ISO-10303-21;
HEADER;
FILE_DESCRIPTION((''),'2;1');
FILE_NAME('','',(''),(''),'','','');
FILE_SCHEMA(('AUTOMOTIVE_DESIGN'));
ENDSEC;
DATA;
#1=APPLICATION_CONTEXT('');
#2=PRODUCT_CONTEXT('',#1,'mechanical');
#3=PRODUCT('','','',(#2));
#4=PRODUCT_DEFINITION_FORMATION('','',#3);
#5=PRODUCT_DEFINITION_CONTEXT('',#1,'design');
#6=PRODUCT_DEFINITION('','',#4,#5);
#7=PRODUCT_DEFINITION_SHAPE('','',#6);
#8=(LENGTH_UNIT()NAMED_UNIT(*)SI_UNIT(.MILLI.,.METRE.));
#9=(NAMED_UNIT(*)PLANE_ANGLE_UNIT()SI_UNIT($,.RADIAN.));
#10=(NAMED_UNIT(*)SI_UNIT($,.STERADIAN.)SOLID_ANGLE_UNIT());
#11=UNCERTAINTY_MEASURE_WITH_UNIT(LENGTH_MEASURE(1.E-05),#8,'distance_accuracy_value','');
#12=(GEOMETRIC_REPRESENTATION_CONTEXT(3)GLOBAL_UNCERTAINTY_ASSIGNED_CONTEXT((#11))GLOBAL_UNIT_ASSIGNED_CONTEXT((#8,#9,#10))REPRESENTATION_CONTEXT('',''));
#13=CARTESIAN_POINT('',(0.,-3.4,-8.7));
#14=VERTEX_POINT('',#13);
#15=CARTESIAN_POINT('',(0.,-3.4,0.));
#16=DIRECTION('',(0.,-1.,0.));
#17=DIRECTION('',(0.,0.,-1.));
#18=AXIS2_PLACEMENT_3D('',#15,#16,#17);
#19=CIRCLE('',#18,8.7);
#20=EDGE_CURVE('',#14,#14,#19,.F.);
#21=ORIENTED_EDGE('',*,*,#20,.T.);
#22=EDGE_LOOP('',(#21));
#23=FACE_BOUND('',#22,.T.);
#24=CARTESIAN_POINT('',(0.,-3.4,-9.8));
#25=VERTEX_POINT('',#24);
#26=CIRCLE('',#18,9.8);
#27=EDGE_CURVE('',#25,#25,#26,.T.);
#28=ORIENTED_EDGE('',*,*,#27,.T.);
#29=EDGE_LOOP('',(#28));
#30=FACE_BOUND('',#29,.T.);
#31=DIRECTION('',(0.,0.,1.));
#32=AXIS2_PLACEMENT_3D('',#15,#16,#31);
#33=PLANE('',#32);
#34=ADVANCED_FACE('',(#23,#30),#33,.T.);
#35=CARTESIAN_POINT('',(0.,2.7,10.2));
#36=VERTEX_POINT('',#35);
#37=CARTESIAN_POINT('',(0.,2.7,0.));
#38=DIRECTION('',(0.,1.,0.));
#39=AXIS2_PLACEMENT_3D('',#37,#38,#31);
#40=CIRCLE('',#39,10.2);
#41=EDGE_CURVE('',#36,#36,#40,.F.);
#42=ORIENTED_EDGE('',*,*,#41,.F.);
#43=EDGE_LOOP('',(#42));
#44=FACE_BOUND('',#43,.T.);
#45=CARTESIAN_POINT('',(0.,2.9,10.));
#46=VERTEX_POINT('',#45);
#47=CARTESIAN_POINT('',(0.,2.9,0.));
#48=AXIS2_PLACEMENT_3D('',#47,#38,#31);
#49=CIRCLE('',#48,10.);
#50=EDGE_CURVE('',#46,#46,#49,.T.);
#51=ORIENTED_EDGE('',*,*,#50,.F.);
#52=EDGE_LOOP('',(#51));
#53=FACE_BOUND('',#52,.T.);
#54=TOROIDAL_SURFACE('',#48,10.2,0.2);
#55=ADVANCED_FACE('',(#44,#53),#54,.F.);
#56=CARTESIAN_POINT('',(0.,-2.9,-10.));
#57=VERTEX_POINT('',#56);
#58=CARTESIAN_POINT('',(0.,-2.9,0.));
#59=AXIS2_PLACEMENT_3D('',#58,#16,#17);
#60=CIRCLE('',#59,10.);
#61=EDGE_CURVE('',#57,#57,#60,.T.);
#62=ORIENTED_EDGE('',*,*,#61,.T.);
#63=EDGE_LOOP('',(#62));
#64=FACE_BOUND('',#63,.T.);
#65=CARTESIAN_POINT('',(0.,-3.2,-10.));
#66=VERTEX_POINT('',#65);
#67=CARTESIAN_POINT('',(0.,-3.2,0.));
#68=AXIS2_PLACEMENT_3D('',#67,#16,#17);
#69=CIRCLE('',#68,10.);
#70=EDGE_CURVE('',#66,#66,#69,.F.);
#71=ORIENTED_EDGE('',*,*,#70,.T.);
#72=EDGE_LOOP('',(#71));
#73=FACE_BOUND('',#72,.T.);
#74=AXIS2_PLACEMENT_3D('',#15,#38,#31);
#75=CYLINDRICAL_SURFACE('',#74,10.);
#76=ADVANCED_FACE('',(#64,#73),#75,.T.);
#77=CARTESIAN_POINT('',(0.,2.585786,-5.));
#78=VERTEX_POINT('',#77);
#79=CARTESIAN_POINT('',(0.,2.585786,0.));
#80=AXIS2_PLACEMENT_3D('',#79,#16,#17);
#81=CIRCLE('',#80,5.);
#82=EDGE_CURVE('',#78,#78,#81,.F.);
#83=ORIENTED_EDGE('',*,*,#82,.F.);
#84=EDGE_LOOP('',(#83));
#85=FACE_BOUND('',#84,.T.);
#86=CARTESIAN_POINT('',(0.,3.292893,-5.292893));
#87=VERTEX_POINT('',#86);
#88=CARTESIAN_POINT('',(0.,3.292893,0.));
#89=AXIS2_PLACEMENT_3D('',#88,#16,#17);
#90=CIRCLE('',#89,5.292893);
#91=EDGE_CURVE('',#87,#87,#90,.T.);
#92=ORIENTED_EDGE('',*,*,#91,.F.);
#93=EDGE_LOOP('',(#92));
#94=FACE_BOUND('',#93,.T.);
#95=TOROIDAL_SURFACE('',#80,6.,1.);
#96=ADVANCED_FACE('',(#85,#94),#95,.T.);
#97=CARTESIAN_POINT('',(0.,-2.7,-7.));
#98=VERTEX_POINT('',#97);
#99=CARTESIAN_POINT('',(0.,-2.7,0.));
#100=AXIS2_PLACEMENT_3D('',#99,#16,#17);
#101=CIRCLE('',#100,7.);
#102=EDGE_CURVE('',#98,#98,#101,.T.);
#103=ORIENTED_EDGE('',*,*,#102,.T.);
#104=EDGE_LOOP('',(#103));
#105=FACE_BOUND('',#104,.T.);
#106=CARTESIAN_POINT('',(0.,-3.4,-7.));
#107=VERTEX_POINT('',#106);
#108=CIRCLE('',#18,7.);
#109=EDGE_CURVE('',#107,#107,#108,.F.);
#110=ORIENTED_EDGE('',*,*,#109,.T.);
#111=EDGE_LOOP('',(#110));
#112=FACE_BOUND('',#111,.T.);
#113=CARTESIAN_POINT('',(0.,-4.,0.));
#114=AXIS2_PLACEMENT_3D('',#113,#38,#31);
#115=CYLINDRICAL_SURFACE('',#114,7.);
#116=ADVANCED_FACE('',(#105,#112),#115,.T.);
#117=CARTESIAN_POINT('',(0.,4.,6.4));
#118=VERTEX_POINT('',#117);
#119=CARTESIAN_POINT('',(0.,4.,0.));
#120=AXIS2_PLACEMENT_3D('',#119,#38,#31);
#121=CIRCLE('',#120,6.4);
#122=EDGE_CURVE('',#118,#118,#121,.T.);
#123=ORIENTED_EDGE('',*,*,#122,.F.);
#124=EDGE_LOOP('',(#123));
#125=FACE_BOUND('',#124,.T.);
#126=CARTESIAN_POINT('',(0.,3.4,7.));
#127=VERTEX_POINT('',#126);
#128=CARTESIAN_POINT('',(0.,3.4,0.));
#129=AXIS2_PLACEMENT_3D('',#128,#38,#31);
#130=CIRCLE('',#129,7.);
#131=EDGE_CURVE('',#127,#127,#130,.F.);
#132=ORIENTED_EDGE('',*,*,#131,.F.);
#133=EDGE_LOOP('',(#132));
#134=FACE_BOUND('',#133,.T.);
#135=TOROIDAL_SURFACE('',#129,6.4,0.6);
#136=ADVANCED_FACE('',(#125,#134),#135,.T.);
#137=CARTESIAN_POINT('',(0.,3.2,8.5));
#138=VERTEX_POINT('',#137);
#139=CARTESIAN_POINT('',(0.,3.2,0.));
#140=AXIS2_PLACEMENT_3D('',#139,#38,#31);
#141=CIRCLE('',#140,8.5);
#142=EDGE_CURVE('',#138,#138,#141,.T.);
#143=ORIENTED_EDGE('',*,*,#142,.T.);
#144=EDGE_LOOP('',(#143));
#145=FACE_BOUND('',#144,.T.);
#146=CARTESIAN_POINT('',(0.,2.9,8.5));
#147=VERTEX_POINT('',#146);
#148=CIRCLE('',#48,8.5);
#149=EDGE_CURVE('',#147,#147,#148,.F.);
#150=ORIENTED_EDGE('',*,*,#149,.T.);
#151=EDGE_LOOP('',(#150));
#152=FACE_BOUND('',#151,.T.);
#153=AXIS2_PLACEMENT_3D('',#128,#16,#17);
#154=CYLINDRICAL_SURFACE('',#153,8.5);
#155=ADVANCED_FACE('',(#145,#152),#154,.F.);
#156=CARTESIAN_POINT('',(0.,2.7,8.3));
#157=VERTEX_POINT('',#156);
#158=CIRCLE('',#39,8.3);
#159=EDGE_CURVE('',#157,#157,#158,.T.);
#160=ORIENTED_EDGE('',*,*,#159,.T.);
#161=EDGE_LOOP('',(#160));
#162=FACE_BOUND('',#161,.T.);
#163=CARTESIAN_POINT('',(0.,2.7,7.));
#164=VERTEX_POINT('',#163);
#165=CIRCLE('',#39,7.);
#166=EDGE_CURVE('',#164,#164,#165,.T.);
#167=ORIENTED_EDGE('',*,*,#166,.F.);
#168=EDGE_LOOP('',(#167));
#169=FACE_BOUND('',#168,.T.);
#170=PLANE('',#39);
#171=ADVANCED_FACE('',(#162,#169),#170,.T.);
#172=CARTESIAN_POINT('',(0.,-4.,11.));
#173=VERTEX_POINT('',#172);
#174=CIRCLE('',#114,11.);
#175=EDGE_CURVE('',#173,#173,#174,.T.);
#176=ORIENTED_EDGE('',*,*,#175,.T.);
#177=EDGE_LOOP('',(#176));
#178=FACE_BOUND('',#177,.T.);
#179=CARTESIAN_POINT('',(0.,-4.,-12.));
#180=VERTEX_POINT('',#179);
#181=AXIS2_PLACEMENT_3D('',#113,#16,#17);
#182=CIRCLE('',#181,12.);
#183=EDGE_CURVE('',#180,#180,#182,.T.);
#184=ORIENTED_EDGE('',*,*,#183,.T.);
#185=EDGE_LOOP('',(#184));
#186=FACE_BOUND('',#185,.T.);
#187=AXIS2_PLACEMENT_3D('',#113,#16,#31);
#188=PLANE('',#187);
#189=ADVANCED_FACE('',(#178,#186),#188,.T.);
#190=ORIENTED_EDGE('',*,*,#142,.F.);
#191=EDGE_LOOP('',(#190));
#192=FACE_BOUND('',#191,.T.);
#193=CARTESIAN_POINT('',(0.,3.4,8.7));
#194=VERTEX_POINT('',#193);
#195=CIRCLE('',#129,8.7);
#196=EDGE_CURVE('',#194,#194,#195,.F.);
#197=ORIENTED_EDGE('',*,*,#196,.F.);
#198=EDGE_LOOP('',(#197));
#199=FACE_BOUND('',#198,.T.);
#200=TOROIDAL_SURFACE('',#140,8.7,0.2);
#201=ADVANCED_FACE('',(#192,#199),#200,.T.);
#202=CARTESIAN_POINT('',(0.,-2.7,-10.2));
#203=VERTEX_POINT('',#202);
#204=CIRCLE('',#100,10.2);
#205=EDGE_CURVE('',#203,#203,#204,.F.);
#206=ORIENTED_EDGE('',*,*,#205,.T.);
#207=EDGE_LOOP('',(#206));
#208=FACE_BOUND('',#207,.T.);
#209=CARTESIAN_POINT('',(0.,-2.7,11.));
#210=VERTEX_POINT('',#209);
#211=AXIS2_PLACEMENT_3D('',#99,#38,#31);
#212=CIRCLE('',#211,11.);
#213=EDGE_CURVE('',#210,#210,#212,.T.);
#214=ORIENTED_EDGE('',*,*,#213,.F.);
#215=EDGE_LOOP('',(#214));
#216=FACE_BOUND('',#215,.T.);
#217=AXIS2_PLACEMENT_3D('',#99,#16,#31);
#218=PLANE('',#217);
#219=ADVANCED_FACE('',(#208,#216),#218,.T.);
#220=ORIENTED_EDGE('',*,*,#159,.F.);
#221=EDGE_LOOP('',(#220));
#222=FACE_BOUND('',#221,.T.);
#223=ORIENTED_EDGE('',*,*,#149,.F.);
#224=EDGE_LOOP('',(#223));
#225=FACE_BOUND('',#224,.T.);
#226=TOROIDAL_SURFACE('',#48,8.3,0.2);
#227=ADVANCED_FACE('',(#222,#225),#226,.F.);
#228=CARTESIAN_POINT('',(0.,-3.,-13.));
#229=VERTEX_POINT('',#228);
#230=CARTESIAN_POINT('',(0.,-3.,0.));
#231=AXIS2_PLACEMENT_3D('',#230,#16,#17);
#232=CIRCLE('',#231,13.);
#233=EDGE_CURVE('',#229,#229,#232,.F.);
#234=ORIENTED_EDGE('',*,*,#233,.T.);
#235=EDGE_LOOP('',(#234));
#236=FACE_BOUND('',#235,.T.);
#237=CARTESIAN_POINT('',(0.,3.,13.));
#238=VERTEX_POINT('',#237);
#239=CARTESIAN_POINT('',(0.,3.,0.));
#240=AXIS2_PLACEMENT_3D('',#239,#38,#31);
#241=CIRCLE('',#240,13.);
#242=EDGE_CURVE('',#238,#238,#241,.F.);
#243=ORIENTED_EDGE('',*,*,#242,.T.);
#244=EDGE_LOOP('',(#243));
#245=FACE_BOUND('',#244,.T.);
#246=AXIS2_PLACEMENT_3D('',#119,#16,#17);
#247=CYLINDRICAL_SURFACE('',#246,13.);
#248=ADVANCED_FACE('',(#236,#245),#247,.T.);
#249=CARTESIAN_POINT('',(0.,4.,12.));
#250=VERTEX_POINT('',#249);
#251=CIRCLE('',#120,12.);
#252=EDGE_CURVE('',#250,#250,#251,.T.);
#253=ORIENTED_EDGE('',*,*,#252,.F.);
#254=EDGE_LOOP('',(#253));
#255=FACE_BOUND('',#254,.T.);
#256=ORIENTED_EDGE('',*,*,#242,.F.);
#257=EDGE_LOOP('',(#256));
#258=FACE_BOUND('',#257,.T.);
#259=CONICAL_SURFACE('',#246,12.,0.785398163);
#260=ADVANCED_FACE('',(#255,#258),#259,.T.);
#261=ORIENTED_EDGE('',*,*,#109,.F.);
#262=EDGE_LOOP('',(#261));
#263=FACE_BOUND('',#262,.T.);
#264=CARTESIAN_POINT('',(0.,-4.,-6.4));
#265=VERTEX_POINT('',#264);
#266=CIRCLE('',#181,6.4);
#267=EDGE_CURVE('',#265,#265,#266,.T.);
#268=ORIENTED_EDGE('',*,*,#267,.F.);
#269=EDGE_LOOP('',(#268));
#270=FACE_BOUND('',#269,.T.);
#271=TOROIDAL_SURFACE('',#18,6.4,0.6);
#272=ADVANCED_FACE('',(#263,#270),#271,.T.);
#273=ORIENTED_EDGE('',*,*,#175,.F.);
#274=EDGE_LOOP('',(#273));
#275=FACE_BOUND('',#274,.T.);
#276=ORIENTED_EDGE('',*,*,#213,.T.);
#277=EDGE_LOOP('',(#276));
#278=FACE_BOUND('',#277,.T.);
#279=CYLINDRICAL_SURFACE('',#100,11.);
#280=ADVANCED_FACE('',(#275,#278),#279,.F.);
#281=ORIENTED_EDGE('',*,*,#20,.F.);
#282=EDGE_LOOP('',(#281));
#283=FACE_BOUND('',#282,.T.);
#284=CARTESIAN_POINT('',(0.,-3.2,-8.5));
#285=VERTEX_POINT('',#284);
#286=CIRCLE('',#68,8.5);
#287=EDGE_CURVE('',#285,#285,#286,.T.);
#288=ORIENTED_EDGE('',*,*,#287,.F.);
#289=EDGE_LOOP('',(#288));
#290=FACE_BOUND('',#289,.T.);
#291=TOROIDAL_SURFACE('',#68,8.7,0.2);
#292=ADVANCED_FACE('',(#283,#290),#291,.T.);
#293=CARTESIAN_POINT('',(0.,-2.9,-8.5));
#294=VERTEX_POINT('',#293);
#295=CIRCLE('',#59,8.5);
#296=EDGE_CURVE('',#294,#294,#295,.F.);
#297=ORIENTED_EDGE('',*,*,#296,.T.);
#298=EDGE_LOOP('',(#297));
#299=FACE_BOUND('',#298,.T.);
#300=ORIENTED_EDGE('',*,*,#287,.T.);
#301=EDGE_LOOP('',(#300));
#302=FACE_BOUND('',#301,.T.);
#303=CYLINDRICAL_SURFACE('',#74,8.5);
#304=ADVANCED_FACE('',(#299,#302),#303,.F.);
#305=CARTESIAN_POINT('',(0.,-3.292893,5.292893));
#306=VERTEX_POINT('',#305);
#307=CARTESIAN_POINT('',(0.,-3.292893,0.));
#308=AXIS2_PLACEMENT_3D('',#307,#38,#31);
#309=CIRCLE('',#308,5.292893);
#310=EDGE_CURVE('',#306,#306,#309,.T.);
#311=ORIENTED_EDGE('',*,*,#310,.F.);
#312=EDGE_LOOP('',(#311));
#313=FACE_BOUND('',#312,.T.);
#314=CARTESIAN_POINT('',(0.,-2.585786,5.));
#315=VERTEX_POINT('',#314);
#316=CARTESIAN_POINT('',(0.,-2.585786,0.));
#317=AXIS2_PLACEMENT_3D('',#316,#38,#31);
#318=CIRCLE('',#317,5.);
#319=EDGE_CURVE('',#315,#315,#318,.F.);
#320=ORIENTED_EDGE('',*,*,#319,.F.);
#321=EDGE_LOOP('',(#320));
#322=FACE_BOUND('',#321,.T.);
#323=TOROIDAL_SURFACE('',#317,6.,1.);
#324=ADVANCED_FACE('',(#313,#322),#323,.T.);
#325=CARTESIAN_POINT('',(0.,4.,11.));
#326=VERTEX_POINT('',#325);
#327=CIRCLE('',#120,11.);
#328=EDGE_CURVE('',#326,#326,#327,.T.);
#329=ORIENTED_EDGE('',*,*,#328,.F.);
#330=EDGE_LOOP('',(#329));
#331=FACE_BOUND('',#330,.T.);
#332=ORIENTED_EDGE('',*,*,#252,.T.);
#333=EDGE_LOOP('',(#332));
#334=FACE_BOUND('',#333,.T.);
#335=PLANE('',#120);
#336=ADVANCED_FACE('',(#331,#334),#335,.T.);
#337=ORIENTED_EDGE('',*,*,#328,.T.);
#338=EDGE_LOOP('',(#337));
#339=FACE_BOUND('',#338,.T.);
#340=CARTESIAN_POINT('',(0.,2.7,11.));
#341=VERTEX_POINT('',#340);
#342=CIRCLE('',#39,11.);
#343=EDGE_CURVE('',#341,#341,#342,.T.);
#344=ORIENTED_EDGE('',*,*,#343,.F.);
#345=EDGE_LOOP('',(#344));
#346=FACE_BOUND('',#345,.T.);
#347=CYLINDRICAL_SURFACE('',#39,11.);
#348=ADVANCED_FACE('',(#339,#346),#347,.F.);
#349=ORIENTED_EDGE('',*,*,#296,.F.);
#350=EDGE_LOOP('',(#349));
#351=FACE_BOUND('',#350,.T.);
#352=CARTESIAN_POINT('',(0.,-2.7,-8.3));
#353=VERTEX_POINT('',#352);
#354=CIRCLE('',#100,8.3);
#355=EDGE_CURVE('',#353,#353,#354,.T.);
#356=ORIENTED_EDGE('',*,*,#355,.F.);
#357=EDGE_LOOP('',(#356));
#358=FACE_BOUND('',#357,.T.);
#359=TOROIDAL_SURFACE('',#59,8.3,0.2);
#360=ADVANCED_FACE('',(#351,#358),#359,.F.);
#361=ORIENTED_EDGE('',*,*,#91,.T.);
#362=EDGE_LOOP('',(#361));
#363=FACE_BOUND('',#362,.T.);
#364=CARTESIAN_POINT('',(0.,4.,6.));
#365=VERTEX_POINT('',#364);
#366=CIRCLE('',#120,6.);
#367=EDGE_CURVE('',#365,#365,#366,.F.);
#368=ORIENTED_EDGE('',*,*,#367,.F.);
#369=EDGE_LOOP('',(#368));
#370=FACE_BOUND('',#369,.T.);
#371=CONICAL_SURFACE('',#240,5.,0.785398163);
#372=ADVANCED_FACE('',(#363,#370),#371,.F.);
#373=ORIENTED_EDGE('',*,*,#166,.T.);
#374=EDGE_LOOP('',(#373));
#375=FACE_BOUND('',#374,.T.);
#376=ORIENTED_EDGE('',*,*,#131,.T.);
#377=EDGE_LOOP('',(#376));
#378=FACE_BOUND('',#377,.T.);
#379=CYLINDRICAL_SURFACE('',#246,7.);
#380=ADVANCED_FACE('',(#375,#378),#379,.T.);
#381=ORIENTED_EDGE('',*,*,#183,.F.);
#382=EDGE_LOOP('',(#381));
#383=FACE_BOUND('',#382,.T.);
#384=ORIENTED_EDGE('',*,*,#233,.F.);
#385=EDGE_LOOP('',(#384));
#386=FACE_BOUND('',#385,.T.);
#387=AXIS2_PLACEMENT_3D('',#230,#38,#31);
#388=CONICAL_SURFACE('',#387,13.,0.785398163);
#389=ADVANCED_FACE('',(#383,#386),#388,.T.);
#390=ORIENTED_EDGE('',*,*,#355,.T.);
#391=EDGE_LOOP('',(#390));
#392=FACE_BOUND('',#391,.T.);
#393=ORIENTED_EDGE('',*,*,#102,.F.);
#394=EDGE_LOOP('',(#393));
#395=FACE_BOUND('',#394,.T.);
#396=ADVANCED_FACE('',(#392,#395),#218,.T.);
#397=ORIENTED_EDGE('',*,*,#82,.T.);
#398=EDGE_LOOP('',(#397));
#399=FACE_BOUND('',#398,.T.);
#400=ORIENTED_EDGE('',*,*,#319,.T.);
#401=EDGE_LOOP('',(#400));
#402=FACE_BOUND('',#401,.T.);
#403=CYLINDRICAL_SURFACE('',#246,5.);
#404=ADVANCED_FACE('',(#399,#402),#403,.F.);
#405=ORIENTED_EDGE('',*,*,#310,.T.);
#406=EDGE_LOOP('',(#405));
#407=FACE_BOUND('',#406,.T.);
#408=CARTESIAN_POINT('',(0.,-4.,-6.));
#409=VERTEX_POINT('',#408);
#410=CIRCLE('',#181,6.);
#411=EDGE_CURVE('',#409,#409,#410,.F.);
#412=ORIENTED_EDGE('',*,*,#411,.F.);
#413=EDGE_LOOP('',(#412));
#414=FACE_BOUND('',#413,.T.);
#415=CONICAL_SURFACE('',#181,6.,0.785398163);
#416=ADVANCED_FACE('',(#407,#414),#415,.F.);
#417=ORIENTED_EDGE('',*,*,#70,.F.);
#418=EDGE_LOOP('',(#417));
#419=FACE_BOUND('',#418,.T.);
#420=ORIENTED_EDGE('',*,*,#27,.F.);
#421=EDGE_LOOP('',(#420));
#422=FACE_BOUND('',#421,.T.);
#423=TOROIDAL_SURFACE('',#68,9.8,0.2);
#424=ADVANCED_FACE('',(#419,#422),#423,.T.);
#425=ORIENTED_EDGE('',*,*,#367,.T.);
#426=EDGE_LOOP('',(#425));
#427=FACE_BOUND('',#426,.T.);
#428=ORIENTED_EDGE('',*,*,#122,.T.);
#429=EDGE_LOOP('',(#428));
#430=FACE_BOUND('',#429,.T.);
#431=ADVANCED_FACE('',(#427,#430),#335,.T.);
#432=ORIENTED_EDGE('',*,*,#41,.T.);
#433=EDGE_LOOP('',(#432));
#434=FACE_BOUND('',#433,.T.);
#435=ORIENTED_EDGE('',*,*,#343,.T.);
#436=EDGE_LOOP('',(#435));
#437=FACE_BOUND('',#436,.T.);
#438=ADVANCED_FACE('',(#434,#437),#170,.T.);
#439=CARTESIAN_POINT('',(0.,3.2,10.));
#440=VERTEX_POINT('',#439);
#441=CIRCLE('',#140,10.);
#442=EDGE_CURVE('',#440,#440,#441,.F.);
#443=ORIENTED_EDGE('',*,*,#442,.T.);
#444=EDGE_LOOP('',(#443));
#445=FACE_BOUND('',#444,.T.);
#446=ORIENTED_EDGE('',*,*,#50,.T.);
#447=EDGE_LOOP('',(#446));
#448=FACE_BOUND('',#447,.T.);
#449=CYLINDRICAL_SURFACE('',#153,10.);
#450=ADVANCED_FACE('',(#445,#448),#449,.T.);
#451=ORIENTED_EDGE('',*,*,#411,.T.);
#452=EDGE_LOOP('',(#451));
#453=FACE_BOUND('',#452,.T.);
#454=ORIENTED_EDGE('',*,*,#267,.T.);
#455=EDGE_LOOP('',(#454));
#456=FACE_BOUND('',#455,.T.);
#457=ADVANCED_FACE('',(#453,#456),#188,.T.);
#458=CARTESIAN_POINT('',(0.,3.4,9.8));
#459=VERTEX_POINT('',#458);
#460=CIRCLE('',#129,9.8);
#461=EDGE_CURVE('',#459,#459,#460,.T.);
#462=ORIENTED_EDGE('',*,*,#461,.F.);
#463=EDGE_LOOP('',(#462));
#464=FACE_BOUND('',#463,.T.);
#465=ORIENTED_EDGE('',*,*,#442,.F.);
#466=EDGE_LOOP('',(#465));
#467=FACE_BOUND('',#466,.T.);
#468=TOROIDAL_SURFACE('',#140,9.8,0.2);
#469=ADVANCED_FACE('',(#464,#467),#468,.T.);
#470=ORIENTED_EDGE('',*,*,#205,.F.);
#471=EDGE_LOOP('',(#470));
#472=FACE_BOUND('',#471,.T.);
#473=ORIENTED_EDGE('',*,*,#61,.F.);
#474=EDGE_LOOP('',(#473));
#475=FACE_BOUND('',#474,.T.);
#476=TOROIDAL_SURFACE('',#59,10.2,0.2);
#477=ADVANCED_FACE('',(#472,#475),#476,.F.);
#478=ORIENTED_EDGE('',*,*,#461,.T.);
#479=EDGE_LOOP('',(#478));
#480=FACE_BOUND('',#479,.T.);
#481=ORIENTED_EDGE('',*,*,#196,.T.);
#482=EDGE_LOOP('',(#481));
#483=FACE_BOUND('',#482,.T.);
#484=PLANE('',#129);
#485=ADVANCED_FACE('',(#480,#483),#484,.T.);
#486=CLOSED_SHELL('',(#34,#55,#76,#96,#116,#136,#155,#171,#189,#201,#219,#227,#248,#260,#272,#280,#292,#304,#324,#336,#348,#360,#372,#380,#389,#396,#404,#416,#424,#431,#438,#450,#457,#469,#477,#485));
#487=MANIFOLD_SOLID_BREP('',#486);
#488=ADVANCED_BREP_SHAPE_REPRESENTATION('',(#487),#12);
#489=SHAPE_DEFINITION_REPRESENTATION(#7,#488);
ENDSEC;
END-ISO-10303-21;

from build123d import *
from build123d.topology import SkipClean

# Parameters (mm, degrees)
SKETCH1_R           = 13
BOSS_EXTRUDE1_DEPTH = 4
SKETCH2_R           = 11
CUT_EXTRUDE1_DEPTH  = 1.3
SKETCH3_R           = 10
SKETCH3_R_2         = 8.5
BOSS_EXTRUDE2_DEPTH = 0.7
SKETCH4_R           = 7
SKETCH4_R_2         = 5
BOSS_EXTRUDE3_DEPTH = 1.3
SKETCH5_R           = 5
CUT_EXTRUDE2_DEPTH  = 19.581980519
CHAMFER1_SIZE       = 1
CHAMFER2_SIZE       = 1
FILLET2_R           = 1
FILLET3_R           = 0.6
FILLET6_R           = 0.2


# Read off the part's stored shape, not the designer's step: Mirror1
with BuildPart() as part:
    # Sketch1 → Boss-Extrude1 (new body)
    with BuildSketch(Plane(origin=(0, 0, 0), x_dir=(1, 0, 0), z_dir=(0, 1, 0))):
        with Locations(Location((0, 0, 0), (0, 0, 270))):
            Circle(SKETCH1_R)
    extrude(amount=BOSS_EXTRUDE1_DEPTH)

    # Sketch2 → Cut-Extrude1 (cut)
    with BuildSketch(Plane(origin=(0, 4, 0), x_dir=(1, 0, 0), z_dir=(0, 1, 0))):
        with Locations(Location((0, 0, 0), (0, 0, 270))):
            Circle(SKETCH2_R)
    extrude(amount=-CUT_EXTRUDE1_DEPTH, mode=Mode.SUBTRACT)

    # Sketch3 → Boss-Extrude2 (add)
    with BuildSketch(Plane(origin=(0, 2.7, 0), x_dir=(1, 0, 0), z_dir=(0, 1, 0))):
        with Locations(Location((0, 0, 0), (0, 0, 270))):
            Circle(SKETCH3_R)
        with Locations(Location((0, 0, 0), (0, 0, 270))):
            Circle(SKETCH3_R_2, mode=Mode.SUBTRACT)
    extrude(amount=BOSS_EXTRUDE2_DEPTH)

    # Sketch4 → Boss-Extrude3 (add)
    with BuildSketch(Plane(origin=(0, 2.7, 0), x_dir=(1, 0, 0), z_dir=(0, 1, 0))):
        with Locations(Location((0, 0, 0), (0, 0, 270))):
            Circle(SKETCH4_R)
        with Locations(Location((0, 0, 0), (0, 0, 270))):
            Circle(SKETCH4_R_2, mode=Mode.SUBTRACT)
    extrude(amount=BOSS_EXTRUDE3_DEPTH)

    # Sketch5 → Cut-Extrude2 (cut, through all)
    with BuildSketch(Plane(origin=(0, 2.7, 0), x_dir=(1, 0, 0), z_dir=(0, 1, 0))):
        with Locations(Location((0, 0, 0), (0, 0, 270))):
            Circle(SKETCH5_R)
    extrude(amount=-CUT_EXTRUDE2_DEPTH, mode=Mode.SUBTRACT)

    # Chamfer1
    chamfer1_edges = [part.edges().sort_by_distance(p)[0] for p in [
        (0, 4, -13),
    ]]
    chamfer(chamfer1_edges, length=CHAMFER1_SIZE)

    # Chamfer2
    chamfer2_edges = [part.edges().sort_by_distance(p)[0] for p in [
        (0, 4, -5),
    ]]
    chamfer(chamfer2_edges, length=CHAMFER2_SIZE)

    # Fillet2
    fillet2_edges = [part.edges().sort_by_distance(p)[0] for p in [
        (0, 3, -5),
    ]]
    fillet(fillet2_edges, radius=FILLET2_R)

    # Fillet3
    fillet3_edges = [part.edges().sort_by_distance(p)[0] for p in [
        (0, 4, -7),
    ]]
    fillet(fillet3_edges, radius=FILLET3_R)

    # Fillet6
    fillet6_edges = [part.edges().sort_by_distance(p)[0] for p in [
        (0, 3.4, -10),
        (0, 2.7, -10),
        (0, 3.4, -8.5),
        (0, 2.7, -8.5),
    ]]
    fillet(fillet6_edges, radius=FILLET6_R)

    # Mirror1 outline → Mirror1 (revolve)
    with SkipClean():  # the faces are left unmerged after this step: merging them gives an invalid solid
        with BuildSketch(Plane.XY):
            with BuildLine():
                Line((13, -3), (13, 0))
                Line((13, 0), (5, 0))
                Line((5, 0), (5, -2.585786438))
                ThreePointArc((5, -2.585786438), (5.076120467, -2.96846987), (5.292893219, -3.292893219))
                Line((5.292893219, -3.292893219), (6, -4))
                Line((6, -4), (6.4, -4))
                ThreePointArc((6.4, -4), (6.824264069, -3.824264069), (7, -3.4))
                Line((7, -3.4), (7, -2.7))
                Line((7, -2.7), (8.3, -2.7))
                ThreePointArc((8.3, -2.7), (8.441421356, -2.758578644), (8.5, -2.9))
                Line((8.5, -2.9), (8.5, -3.2))
                ThreePointArc((8.5, -3.2), (8.558578644, -3.341421356), (8.7, -3.4))
                Line((8.7, -3.4), (9.8, -3.4))
                ThreePointArc((9.8, -3.4), (9.941421356, -3.341421356), (10, -3.2))
                Line((10, -3.2), (10, -2.9))
                ThreePointArc((10, -2.9), (10.058578644, -2.758578644), (10.2, -2.7))
                Line((10.2, -2.7), (11, -2.7))
                Line((11, -2.7), (11, -4))
                Line((11, -4), (12, -4))
                Line((12, -4), (13, -3))
            make_face()
        revolve(axis=Axis((0, 0, 0), (0, 1, 0)))
    add(part.part.scale(1), mode=Mode.REPLACE)  # the faces are merged on a copy


solid = part.part
